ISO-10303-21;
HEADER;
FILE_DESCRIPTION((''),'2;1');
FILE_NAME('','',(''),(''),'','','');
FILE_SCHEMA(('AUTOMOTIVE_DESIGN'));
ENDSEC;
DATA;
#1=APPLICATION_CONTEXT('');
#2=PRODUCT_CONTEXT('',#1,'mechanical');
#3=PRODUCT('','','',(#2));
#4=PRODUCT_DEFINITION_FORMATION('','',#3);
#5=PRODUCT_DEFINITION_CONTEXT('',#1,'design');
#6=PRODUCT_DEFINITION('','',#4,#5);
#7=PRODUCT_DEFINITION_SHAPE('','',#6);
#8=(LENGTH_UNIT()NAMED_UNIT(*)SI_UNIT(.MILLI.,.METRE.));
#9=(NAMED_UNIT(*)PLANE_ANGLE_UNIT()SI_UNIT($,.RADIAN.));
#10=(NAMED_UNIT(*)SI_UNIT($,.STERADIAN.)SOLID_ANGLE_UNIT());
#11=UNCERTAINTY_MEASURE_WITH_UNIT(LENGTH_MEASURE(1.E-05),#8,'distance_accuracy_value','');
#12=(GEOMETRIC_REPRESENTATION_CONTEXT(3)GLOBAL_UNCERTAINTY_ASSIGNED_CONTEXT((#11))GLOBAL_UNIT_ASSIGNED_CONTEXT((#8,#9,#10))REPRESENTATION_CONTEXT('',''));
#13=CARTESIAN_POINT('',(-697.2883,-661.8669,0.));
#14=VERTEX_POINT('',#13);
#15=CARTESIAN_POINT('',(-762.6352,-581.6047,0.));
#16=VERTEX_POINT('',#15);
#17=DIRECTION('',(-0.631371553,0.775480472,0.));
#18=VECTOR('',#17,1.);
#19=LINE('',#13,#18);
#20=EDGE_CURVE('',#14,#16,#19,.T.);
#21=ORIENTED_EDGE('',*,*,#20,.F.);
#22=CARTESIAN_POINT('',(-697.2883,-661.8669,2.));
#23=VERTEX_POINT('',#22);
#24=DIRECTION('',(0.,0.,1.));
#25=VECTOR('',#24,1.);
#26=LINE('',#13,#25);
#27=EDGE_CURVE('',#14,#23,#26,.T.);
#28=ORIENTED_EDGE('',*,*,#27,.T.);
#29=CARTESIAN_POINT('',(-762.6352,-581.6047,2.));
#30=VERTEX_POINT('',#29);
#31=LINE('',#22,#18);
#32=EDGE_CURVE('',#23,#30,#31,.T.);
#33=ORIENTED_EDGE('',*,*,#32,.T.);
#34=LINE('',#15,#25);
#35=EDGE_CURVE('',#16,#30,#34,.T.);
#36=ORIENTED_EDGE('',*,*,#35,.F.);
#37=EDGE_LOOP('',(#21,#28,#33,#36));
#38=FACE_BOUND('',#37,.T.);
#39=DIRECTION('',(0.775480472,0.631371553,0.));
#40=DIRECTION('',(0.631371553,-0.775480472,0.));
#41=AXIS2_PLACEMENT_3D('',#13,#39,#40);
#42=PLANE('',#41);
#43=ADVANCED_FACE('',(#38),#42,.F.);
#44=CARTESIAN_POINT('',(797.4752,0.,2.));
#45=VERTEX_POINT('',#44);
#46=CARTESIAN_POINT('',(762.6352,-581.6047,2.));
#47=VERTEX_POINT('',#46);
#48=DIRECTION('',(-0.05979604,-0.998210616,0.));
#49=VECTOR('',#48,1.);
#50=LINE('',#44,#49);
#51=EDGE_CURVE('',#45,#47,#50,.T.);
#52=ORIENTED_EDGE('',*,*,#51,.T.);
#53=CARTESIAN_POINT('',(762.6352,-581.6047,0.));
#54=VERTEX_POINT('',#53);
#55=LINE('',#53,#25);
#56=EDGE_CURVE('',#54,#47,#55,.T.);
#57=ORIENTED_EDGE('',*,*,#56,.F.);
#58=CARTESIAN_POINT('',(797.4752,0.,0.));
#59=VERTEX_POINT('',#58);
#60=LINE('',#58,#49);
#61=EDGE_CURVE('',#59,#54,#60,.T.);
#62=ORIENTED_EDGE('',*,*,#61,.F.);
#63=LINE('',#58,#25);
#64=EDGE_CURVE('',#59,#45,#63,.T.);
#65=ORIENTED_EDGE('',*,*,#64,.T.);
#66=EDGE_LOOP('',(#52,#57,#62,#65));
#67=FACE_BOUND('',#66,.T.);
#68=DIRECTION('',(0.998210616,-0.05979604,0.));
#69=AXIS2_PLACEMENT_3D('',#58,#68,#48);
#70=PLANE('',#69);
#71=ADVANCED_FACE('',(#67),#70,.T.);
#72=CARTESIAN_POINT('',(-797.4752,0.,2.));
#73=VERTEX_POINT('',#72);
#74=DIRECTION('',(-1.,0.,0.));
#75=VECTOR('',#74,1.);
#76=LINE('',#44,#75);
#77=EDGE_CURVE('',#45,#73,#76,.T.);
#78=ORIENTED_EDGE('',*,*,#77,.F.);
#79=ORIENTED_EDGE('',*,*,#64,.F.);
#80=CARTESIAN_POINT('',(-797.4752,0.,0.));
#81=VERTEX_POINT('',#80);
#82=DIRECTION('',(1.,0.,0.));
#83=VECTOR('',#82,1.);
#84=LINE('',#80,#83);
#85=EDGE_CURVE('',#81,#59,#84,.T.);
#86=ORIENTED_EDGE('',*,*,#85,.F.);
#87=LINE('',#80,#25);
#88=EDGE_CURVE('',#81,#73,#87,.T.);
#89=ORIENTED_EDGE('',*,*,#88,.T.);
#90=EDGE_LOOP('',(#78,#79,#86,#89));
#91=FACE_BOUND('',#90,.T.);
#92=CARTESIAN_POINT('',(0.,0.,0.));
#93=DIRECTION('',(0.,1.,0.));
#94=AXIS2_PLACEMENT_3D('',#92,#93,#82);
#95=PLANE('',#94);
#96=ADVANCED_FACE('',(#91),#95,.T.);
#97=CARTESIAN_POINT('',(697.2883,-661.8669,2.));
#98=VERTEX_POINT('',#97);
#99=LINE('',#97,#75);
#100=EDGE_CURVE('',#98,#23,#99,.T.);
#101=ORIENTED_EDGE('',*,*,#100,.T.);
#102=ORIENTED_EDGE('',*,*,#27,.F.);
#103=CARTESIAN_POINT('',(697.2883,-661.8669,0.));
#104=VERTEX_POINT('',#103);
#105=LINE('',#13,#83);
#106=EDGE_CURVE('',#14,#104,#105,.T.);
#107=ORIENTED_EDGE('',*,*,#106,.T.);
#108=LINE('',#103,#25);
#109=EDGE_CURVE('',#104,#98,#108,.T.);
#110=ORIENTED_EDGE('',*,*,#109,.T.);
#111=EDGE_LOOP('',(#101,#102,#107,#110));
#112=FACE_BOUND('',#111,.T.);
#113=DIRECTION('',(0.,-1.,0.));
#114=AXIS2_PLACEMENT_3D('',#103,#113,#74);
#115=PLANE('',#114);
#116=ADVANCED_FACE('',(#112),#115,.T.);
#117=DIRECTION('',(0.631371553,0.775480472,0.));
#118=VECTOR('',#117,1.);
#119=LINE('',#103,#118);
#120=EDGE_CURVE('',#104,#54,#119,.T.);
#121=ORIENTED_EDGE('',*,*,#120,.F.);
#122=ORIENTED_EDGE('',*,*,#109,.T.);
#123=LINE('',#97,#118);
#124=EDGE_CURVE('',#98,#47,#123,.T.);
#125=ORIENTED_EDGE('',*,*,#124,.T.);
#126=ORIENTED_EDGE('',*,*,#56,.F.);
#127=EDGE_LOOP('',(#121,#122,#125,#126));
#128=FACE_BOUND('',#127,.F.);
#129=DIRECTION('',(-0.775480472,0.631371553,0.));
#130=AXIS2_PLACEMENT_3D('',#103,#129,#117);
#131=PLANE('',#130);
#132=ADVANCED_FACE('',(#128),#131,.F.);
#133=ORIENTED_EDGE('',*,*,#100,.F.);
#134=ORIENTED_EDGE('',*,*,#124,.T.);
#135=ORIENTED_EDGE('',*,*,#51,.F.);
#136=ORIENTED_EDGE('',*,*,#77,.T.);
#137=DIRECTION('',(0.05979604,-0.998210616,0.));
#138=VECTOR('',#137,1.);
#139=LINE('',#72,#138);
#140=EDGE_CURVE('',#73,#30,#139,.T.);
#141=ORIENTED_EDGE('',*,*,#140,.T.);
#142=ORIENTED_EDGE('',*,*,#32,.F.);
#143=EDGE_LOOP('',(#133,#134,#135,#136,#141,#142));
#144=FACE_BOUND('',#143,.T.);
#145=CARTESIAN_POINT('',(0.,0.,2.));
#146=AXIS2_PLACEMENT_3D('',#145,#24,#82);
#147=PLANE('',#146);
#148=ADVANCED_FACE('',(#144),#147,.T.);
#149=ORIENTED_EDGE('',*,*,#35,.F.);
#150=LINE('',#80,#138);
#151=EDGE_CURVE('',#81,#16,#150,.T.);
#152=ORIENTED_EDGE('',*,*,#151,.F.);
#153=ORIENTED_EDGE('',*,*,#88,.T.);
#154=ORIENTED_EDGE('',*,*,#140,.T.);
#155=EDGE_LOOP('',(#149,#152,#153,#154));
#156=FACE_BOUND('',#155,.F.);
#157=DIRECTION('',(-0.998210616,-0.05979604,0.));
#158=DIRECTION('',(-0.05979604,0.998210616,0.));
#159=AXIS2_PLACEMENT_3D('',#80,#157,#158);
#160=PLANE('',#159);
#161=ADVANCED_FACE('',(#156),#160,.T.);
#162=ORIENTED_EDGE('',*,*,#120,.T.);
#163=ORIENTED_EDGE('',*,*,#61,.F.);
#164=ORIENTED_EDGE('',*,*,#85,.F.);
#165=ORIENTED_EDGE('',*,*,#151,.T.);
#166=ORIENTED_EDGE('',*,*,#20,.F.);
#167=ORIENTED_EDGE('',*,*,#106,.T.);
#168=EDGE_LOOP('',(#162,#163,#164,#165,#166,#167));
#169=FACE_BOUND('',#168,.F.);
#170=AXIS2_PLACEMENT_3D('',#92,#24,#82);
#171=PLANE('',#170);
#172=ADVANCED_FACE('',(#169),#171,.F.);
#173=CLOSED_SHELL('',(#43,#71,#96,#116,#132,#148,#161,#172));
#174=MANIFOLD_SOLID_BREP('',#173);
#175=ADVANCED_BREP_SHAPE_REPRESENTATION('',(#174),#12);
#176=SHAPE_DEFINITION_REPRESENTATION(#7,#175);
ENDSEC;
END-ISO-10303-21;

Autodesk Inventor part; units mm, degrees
ref_plane "YZ Plane" through (0, 0, 0) normal (1, 0, 0) x (0, 1, 0)
ref_plane "XZ Plane" through (0, 0, 0) normal (0, 1, 0) x (-1, 0, 0)
ref_plane "XY Plane" through (0, 0, 0) normal (0, 0, 1) x (1, 0, 0)
sketch "Sketch1" plane through (0, 0, 0) normal (0, 0, 1) x (1, 0, 0)
  line L0 (797.4752, 0) -> (797.4752, -661.8669) construction
  line L1 (797.4752, -661.8669) -> (0, -661.8669)
  line L2 (751.1573, -579.8638) -> (684.3931, -661.8669) construction
  ellipse E0 centre (-10250, 795.2799) end of major axis (-10250.7907, -13633.3868) minor radius 11053 (753.0187, -574.9033) -> (782.4805, -83.0791) ccw construction
  line L3 (797.4752, 0) -> (762.6352, -581.6047)
  line L4 (697.2883, -661.8669) -> (797.4752, -538.8126)
  line L5 (753.0187, -574.9033) -> (763.0008, -575.5013) construction
  line L6 (782.4805, -83.0791) -> (792.4626, -83.6771) construction
  line L7 (0, -661.8669) -> (0, 0)
  line L8 (0, 0) -> (797.4752, 0)
  dimension "d3" = 10
  dimension "d4" = 10
  dimension "d5" = 10
extrude "Plate1" add sketch "Sketch1" along normal blind 2
mirror "Mirror1" about plane through (0, 0, 0) normal (1, 0, 0)
sketch "Sketch2" plane through (0, 0, 2) normal (0, 0, 1) x (1, 0, 0)
  line L0 (-55, -611.8669) -> (-55, -599.8669) construction
  line L1 (-55, -599.8669) -> (55, -599.8669) construction
  line L2 (55, -599.8669) -> (55, -611.8669) construction
  line L3 (55, -611.8669) -> (-55, -611.8669) construction
  line L4 (-697.2883, -661.8669) -> (697.2883, -661.8669) projected
  point P0 (0, 0)
  point P1 (0, -611.8669)
  point P2 (0, -661.8669)
  dimension "d6" = 12
  dimension "d7" = 110
  dimension "d8" = 50
mark "Mark1"
equation "\"d2\" = Thickness"
equation "\"BendReliefWidth\" = Thickness"
equation "\"BendReliefDepth\" = 0.5 * Thickness"
equation "\"CornerReliefSize\" = 4 * Thickness"
equation "\"MinimumRemnant\" = 2 * Thickness"
equation "\"TransitionRadius\" = BendRadius"
equation "\"JacobiRadiusSize\" = BendRadius"
equation "\"GapSize\" = Thickness"
equation "\"Thickness\" = 2"
equation "\"BendRadius\" = 2.75"
properties part number "MSC 075 face 2" material "AISI304"
